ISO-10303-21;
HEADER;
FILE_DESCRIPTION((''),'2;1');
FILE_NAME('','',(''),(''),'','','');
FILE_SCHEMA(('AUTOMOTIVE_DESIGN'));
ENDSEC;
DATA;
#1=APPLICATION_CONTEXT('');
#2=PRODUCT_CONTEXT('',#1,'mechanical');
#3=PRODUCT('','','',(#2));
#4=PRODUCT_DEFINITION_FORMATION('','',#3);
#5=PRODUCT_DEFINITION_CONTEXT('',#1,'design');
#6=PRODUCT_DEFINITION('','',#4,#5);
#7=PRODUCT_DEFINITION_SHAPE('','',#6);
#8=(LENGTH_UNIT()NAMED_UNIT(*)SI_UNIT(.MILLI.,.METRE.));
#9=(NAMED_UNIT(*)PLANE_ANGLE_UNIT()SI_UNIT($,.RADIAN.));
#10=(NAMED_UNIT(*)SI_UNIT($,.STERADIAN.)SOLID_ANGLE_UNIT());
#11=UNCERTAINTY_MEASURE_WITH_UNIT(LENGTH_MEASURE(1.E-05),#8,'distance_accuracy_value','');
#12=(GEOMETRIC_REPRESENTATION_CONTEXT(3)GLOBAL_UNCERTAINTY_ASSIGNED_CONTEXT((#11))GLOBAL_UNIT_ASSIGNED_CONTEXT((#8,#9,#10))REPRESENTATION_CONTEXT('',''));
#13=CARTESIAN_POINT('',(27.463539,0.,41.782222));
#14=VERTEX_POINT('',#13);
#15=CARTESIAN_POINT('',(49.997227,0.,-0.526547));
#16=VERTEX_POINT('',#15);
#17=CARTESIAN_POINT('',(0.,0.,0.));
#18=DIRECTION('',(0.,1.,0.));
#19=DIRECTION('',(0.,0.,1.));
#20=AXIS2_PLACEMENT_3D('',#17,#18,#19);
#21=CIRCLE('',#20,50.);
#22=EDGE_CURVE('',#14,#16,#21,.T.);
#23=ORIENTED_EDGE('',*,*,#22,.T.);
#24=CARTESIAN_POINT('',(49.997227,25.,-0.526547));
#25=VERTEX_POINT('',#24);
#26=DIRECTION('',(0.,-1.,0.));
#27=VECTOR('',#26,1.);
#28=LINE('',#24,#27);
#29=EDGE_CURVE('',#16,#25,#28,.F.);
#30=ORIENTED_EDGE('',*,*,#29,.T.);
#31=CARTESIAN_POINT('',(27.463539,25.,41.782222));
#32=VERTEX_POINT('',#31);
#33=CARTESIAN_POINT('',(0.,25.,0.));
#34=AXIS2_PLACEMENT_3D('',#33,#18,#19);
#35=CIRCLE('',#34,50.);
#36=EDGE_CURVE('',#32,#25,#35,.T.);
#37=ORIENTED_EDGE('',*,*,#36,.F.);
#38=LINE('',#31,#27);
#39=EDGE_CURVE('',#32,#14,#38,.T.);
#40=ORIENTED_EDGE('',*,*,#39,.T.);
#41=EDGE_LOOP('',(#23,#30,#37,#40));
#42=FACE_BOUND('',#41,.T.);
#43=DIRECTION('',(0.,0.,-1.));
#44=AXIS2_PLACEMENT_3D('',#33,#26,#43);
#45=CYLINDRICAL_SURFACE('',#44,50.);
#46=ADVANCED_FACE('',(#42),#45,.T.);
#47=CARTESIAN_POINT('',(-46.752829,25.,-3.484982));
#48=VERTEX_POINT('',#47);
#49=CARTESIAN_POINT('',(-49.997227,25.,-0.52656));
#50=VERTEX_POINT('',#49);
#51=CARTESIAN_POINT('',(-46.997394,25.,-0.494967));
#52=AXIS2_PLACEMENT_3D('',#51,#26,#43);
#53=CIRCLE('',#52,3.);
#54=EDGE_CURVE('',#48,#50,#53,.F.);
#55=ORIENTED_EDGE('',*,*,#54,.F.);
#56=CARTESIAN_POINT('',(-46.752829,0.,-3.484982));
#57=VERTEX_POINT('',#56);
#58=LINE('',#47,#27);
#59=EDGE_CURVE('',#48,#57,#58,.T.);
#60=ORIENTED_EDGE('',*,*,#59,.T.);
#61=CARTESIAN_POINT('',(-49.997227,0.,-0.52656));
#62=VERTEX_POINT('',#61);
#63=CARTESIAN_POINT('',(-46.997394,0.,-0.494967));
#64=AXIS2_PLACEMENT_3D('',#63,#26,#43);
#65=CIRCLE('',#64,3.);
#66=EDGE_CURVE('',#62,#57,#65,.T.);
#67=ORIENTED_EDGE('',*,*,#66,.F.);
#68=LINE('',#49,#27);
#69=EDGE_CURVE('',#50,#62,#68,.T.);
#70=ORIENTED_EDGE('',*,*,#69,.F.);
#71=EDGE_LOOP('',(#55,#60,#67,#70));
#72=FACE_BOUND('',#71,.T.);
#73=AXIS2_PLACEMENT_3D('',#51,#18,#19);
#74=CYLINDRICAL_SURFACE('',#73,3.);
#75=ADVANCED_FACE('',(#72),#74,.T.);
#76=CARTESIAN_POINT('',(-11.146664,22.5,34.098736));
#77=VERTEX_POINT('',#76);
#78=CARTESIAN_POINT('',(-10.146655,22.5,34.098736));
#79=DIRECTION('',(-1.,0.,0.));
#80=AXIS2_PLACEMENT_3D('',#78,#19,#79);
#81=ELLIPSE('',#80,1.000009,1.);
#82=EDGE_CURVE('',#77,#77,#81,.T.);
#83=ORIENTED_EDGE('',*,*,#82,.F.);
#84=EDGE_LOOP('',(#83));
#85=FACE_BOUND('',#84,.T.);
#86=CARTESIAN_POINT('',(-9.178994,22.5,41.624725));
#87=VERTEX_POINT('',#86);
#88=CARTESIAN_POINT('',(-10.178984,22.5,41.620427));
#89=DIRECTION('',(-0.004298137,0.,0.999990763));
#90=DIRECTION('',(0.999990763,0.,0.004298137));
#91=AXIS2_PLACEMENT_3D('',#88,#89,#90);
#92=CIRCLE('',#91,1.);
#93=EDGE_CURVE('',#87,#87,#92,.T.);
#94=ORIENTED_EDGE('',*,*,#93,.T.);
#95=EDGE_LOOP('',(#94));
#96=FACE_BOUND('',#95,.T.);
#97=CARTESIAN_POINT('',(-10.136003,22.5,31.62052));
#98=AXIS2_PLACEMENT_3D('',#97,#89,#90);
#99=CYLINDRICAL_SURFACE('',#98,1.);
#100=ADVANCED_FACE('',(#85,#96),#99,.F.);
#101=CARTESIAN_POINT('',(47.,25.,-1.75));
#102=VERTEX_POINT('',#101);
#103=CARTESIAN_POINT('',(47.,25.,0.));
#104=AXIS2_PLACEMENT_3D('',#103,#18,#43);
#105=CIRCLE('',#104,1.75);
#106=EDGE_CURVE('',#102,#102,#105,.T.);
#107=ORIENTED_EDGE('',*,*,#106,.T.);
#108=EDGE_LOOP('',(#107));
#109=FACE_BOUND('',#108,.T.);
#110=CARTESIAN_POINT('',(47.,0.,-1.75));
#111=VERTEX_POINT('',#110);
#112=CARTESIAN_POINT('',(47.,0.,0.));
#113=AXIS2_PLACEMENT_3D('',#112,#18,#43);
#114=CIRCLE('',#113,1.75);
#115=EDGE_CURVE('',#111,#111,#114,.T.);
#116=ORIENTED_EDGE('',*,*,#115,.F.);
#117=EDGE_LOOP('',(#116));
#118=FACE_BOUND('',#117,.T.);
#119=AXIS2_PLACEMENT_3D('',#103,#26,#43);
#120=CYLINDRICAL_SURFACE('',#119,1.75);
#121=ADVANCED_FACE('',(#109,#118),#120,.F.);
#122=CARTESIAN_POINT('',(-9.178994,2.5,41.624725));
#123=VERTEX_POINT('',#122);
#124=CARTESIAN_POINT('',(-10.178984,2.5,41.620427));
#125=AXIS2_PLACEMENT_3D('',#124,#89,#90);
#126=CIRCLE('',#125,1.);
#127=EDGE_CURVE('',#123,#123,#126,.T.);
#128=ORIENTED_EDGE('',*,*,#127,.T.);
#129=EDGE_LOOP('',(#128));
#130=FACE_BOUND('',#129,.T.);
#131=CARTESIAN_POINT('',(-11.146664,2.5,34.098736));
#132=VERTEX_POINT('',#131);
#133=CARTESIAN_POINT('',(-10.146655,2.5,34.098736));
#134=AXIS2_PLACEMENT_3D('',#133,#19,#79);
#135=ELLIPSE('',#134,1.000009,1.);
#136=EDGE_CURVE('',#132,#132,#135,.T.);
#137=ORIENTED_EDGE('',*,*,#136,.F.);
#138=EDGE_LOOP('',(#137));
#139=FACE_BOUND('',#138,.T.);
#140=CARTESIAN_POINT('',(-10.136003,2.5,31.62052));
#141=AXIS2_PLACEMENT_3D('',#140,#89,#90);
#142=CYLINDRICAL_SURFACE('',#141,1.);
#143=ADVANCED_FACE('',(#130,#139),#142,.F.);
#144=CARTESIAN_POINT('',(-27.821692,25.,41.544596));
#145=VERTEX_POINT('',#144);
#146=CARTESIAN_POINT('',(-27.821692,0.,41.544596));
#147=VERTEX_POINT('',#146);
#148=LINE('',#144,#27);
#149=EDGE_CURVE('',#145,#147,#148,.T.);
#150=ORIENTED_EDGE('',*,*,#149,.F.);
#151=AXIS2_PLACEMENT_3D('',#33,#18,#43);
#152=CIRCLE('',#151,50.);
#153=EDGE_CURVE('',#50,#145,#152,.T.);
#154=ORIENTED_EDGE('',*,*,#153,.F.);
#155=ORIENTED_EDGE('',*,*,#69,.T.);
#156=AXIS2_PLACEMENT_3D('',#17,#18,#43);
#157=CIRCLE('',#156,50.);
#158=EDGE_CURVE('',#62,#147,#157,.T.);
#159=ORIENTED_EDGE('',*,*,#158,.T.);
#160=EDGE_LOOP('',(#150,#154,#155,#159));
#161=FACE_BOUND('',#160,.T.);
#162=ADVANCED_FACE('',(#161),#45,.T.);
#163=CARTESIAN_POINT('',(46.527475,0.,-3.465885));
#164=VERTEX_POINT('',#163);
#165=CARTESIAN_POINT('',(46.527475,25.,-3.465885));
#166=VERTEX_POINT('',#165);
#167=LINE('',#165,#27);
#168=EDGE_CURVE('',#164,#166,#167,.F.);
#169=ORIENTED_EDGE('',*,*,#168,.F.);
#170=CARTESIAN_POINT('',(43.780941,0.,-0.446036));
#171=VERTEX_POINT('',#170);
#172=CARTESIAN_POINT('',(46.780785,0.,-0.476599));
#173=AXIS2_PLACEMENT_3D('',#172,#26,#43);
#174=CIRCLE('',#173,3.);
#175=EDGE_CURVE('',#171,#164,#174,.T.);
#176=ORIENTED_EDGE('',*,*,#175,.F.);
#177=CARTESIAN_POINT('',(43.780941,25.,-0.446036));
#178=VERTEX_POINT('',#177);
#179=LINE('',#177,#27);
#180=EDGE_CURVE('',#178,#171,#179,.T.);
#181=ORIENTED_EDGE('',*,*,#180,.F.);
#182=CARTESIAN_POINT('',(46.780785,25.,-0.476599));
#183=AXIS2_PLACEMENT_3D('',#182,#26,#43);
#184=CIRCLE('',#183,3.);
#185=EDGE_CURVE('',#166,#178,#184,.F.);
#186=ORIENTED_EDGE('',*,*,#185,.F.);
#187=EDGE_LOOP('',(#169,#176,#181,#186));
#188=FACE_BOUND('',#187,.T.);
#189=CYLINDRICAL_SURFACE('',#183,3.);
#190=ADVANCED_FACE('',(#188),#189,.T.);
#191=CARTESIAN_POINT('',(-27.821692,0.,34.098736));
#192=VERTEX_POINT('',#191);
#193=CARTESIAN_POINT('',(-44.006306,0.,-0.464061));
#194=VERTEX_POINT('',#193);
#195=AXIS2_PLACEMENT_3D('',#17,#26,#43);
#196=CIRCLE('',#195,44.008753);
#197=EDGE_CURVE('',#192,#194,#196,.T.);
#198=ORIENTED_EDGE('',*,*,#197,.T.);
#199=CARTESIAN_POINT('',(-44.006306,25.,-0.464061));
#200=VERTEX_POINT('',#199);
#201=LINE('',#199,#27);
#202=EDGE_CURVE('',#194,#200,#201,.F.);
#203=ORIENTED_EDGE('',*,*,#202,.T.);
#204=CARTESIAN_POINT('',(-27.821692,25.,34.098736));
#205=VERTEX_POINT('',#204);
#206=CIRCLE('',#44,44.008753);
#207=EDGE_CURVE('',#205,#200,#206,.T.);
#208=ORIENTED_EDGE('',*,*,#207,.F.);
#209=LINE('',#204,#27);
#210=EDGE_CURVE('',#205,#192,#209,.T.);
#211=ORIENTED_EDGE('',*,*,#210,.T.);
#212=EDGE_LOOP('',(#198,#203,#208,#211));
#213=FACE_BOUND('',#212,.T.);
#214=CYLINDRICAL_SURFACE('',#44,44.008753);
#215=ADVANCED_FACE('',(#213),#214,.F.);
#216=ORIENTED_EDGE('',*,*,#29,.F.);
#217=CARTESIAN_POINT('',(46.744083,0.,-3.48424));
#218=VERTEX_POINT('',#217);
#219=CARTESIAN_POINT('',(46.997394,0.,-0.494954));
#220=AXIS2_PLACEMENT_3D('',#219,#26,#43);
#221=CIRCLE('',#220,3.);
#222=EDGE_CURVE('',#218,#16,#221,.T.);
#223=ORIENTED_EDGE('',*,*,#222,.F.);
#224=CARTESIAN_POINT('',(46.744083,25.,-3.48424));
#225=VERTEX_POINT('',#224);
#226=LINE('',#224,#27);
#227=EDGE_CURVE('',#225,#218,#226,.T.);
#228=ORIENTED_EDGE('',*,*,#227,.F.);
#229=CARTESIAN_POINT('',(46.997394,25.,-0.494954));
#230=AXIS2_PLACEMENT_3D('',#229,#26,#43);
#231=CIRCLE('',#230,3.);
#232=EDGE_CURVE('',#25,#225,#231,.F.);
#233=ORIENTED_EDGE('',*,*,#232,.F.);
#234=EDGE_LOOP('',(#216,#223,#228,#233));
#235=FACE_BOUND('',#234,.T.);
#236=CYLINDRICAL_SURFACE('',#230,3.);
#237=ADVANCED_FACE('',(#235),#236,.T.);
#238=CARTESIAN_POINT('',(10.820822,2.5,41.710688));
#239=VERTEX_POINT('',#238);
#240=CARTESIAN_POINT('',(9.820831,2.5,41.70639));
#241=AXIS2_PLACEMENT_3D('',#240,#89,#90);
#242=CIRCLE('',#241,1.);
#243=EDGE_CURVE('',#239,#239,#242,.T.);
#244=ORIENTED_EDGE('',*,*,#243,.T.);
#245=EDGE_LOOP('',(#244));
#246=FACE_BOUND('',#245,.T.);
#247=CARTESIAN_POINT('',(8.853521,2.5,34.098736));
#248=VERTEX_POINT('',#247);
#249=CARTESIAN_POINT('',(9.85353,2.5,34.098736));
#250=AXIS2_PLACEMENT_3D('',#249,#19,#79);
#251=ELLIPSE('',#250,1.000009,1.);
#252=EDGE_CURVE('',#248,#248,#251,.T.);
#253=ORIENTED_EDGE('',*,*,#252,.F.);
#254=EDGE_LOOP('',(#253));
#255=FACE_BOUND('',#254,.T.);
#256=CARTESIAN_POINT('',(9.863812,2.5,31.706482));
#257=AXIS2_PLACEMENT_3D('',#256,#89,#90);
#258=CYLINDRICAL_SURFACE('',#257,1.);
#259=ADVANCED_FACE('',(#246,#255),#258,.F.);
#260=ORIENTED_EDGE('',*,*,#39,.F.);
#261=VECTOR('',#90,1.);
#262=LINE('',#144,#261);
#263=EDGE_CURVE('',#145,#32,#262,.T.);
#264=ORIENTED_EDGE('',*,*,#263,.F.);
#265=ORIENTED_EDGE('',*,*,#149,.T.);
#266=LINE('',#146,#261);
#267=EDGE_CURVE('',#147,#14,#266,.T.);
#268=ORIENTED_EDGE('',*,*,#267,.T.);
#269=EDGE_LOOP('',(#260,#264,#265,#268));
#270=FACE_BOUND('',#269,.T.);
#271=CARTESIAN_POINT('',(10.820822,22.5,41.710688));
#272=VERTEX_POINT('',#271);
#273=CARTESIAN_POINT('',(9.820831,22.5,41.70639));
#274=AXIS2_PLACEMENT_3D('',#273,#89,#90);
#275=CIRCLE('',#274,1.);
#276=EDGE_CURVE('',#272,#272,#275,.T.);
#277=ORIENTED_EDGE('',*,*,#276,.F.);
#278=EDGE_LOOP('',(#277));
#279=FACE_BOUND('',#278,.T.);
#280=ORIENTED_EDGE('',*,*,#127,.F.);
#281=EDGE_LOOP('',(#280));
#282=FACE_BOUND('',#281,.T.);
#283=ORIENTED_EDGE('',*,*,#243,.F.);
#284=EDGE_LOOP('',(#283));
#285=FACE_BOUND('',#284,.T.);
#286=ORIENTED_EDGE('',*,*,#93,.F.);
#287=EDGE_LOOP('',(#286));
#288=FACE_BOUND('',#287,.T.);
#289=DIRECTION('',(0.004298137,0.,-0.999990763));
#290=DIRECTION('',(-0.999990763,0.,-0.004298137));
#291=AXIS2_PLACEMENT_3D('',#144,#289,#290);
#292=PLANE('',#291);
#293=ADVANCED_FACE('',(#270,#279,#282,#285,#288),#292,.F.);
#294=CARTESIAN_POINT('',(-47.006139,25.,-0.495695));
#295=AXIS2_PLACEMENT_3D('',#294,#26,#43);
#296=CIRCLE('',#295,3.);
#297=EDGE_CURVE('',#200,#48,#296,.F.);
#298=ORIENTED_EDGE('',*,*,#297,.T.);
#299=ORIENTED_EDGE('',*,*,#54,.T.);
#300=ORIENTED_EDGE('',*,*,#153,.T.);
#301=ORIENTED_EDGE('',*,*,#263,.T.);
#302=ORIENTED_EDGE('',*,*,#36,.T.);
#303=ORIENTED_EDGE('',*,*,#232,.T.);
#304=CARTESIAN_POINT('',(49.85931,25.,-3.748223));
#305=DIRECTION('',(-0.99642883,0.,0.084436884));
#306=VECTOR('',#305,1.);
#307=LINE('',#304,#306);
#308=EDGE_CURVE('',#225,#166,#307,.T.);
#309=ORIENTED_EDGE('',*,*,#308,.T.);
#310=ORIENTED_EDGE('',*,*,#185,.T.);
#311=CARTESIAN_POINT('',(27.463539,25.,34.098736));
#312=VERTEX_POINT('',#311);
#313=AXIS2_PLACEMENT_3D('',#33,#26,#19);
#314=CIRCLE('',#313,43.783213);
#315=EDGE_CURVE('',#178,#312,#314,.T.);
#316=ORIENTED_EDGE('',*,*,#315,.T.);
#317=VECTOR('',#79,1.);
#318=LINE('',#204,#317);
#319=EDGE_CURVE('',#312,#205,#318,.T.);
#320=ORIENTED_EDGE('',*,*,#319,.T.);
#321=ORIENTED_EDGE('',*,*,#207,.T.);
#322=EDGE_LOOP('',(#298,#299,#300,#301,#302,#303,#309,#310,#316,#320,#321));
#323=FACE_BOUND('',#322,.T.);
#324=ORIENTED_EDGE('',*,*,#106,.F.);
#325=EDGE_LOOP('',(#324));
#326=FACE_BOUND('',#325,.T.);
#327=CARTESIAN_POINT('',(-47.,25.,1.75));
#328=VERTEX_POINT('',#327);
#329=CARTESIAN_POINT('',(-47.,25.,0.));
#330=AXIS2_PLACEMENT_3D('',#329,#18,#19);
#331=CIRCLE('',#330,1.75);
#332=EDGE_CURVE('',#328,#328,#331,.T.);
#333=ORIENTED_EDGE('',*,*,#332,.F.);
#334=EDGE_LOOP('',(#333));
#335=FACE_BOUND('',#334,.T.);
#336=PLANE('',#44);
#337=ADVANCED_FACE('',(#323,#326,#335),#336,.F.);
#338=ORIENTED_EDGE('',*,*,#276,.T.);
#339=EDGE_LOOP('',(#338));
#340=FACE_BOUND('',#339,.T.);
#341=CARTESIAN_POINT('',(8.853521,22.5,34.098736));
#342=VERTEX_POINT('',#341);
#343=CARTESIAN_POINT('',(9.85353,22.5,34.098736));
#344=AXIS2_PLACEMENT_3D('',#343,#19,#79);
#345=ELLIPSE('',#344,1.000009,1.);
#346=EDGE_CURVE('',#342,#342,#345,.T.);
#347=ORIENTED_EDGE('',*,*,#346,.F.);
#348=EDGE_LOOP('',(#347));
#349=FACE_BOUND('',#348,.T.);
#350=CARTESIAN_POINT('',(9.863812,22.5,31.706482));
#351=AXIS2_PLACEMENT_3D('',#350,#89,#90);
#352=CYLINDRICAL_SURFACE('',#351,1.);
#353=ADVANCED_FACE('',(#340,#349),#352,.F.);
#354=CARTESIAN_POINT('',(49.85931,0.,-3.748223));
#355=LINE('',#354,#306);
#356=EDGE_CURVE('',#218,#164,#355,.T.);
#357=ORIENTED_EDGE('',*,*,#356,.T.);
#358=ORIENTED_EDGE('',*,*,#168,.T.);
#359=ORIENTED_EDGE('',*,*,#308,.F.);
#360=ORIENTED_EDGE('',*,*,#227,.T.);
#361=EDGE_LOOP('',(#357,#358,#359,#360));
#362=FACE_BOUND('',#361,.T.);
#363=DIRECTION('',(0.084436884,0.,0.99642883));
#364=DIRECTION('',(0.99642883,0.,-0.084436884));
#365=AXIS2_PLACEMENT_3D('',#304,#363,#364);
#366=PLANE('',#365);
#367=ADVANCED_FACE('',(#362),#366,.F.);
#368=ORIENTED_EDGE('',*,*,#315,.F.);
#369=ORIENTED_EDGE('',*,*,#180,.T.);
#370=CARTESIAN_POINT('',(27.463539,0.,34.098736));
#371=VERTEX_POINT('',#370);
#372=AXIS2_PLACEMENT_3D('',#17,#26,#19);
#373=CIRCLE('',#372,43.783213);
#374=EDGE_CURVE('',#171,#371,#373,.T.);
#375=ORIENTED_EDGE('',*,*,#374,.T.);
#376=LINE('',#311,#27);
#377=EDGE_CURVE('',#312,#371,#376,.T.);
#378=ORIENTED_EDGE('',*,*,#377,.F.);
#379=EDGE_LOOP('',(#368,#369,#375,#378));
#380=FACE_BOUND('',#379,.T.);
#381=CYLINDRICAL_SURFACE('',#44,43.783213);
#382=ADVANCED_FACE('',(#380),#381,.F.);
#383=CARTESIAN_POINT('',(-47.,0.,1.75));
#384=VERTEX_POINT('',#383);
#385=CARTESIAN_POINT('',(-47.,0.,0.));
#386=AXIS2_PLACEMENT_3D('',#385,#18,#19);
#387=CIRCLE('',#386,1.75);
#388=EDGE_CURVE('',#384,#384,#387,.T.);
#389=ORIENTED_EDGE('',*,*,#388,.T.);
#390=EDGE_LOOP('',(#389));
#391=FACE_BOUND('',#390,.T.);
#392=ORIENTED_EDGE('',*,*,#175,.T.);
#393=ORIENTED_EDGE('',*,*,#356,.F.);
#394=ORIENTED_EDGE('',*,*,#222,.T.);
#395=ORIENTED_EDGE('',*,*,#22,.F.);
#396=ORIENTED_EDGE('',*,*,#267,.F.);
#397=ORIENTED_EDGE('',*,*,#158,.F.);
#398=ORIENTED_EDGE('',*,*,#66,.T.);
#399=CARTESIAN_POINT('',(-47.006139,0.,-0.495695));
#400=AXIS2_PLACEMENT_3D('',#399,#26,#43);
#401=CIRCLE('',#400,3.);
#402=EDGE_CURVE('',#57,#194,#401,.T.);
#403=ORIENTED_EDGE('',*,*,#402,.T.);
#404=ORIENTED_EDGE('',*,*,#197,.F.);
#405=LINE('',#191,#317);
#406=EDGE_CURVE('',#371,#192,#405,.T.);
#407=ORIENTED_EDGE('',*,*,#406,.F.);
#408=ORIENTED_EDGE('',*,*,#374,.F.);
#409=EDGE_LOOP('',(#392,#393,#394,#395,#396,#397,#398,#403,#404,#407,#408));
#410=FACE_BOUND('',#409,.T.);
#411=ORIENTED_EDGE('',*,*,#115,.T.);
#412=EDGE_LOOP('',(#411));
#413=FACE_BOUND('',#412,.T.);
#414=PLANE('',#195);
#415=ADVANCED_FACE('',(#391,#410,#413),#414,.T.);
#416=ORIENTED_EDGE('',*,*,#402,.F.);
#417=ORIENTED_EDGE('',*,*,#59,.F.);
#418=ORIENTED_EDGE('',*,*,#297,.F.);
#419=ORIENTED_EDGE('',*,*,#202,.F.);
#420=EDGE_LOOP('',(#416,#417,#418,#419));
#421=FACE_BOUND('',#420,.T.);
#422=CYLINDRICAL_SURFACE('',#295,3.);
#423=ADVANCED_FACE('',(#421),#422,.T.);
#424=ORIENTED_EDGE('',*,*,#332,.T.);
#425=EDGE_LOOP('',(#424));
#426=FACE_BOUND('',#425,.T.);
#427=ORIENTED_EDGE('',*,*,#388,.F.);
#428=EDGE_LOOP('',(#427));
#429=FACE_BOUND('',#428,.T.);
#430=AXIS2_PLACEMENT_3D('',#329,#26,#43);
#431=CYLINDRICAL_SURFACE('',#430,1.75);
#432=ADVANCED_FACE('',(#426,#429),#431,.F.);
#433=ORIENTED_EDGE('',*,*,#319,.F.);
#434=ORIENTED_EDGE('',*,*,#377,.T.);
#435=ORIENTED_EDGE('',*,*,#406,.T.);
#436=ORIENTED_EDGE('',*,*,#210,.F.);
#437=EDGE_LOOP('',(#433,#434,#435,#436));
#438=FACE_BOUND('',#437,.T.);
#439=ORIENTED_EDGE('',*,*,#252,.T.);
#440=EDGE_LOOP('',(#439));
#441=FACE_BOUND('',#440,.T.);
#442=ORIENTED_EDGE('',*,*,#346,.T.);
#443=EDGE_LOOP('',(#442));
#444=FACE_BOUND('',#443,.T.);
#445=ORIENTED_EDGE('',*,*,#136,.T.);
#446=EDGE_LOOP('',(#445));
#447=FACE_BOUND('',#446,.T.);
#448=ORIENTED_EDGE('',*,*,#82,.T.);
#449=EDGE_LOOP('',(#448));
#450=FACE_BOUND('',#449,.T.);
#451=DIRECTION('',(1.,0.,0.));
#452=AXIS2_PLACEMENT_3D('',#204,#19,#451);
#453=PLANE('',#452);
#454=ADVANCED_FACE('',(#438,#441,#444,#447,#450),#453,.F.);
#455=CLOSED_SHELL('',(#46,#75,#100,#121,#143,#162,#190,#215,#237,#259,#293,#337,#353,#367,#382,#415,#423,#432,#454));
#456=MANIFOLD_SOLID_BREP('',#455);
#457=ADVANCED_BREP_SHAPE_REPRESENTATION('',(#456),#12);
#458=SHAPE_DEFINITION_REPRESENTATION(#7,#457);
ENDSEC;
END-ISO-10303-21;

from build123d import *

# Parameters (mm, degrees)
SKETCH1_R           = 1.75
BOSS_EXTRUDE1_DEPTH = 25
FILLET2_R           = 3
FILLET3_R           = 3
SKETCH2_R           = 1
CUT_EXTRUDE1_DEPTH  = 10


with BuildPart() as part:
    # Sketch1 → Boss-Extrude1 (new body)
    with BuildSketch(Plane(origin=(0, 0, 0), x_dir=(1, 0, 0), z_dir=(0, 1, 0))):
        with BuildLine():
            Line((49.859310292, 3.748223209), (43.664405044, 3.223270017))
            ThreePointArc((43.664405044, 3.223270017), (40.162533858, -17.433892609), (27.463538801, -34.098735665))
            Line((27.463538801, -34.098735665), (-27.821692195, -34.098735665))
            ThreePointArc((-27.821692195, -34.098735665), (-40.425237601, -17.394553614), (-43.88915269, 3.242315021))
            Line((-43.88915269, 3.242315021), (-49.859310292, 3.748223209))
            ThreePointArc((-49.859310292, 3.748223209), (-44.960475989, -21.875913669), (-27.821692195, -41.544595839))
            Line((-27.821692195, -41.544595839), (27.463538801, -41.782221537))
            ThreePointArc((27.463538801, -41.782221537), (44.866035011, -22.06895789), (49.859310292, 3.748223209))
        make_face()
        with Locations(Location((-47, 0, 0), (0, 0, 270))):
            Circle(SKETCH1_R, mode=Mode.SUBTRACT)
        with Locations(Location((47, 0, 0), (0, 0, 90))):
            Circle(SKETCH1_R, mode=Mode.SUBTRACT)
    extrude(amount=BOSS_EXTRUDE1_DEPTH)

    # Fillet2
    fillet2_edges = [part.edges().sort_by_distance(p)[0] for p in [
        (43.664405044, 12.5, -3.223270017),
        (49.859310292, 12.5, -3.748223209),
        (-43.88915269, 12.5, -3.242315021),
    ]]
    fillet(fillet2_edges, radius=FILLET2_R)

    # Fillet3
    # the kernel refuses this fillet: 3 mm, written as the material it takes off along each edge
    with BuildSketch(Plane(origin=(-49.859310292, -8.061567981, -3.748223209), x_dir=(-0.04276994163543241, 0, 0.9990849473856073), z_dir=(0, 1, 0))) as fillet3_piece_1:
        with BuildLine():
            CenterArc((3.127888377, 2.998439861), FILLET3_R, 177.607640596, 94.240255032)
            Line((0.13050316, 3.123667112), (0, 0))
            ThreePointArc((0, 0), (1.612313596, -0.026002313), (3.224627192, 0))
        make_face()
    extrude(amount=41.123135962, mode=Mode.SUBTRACT)

    # Sketch2 → Cut-Extrude1 (cut)
    with BuildSketch(Plane(origin=(-0.179076697, 0, 41.663408688), x_dir=(0.9999907629660516, 0, 0.004298137105095237), z_dir=(-0.004298137105095237, 0, 0.9999907629660516))):
        with Locations((10, 2.5)):
            Circle(SKETCH2_R)
        with Locations((-10, 2.5)):
            Circle(SKETCH2_R)
        with Locations((10, 22.5)):
            Circle(SKETCH2_R)
        with Locations((-10, 22.5)):
            Circle(SKETCH2_R)
    extrude(amount=-CUT_EXTRUDE1_DEPTH, mode=Mode.SUBTRACT)


solid = part.part
